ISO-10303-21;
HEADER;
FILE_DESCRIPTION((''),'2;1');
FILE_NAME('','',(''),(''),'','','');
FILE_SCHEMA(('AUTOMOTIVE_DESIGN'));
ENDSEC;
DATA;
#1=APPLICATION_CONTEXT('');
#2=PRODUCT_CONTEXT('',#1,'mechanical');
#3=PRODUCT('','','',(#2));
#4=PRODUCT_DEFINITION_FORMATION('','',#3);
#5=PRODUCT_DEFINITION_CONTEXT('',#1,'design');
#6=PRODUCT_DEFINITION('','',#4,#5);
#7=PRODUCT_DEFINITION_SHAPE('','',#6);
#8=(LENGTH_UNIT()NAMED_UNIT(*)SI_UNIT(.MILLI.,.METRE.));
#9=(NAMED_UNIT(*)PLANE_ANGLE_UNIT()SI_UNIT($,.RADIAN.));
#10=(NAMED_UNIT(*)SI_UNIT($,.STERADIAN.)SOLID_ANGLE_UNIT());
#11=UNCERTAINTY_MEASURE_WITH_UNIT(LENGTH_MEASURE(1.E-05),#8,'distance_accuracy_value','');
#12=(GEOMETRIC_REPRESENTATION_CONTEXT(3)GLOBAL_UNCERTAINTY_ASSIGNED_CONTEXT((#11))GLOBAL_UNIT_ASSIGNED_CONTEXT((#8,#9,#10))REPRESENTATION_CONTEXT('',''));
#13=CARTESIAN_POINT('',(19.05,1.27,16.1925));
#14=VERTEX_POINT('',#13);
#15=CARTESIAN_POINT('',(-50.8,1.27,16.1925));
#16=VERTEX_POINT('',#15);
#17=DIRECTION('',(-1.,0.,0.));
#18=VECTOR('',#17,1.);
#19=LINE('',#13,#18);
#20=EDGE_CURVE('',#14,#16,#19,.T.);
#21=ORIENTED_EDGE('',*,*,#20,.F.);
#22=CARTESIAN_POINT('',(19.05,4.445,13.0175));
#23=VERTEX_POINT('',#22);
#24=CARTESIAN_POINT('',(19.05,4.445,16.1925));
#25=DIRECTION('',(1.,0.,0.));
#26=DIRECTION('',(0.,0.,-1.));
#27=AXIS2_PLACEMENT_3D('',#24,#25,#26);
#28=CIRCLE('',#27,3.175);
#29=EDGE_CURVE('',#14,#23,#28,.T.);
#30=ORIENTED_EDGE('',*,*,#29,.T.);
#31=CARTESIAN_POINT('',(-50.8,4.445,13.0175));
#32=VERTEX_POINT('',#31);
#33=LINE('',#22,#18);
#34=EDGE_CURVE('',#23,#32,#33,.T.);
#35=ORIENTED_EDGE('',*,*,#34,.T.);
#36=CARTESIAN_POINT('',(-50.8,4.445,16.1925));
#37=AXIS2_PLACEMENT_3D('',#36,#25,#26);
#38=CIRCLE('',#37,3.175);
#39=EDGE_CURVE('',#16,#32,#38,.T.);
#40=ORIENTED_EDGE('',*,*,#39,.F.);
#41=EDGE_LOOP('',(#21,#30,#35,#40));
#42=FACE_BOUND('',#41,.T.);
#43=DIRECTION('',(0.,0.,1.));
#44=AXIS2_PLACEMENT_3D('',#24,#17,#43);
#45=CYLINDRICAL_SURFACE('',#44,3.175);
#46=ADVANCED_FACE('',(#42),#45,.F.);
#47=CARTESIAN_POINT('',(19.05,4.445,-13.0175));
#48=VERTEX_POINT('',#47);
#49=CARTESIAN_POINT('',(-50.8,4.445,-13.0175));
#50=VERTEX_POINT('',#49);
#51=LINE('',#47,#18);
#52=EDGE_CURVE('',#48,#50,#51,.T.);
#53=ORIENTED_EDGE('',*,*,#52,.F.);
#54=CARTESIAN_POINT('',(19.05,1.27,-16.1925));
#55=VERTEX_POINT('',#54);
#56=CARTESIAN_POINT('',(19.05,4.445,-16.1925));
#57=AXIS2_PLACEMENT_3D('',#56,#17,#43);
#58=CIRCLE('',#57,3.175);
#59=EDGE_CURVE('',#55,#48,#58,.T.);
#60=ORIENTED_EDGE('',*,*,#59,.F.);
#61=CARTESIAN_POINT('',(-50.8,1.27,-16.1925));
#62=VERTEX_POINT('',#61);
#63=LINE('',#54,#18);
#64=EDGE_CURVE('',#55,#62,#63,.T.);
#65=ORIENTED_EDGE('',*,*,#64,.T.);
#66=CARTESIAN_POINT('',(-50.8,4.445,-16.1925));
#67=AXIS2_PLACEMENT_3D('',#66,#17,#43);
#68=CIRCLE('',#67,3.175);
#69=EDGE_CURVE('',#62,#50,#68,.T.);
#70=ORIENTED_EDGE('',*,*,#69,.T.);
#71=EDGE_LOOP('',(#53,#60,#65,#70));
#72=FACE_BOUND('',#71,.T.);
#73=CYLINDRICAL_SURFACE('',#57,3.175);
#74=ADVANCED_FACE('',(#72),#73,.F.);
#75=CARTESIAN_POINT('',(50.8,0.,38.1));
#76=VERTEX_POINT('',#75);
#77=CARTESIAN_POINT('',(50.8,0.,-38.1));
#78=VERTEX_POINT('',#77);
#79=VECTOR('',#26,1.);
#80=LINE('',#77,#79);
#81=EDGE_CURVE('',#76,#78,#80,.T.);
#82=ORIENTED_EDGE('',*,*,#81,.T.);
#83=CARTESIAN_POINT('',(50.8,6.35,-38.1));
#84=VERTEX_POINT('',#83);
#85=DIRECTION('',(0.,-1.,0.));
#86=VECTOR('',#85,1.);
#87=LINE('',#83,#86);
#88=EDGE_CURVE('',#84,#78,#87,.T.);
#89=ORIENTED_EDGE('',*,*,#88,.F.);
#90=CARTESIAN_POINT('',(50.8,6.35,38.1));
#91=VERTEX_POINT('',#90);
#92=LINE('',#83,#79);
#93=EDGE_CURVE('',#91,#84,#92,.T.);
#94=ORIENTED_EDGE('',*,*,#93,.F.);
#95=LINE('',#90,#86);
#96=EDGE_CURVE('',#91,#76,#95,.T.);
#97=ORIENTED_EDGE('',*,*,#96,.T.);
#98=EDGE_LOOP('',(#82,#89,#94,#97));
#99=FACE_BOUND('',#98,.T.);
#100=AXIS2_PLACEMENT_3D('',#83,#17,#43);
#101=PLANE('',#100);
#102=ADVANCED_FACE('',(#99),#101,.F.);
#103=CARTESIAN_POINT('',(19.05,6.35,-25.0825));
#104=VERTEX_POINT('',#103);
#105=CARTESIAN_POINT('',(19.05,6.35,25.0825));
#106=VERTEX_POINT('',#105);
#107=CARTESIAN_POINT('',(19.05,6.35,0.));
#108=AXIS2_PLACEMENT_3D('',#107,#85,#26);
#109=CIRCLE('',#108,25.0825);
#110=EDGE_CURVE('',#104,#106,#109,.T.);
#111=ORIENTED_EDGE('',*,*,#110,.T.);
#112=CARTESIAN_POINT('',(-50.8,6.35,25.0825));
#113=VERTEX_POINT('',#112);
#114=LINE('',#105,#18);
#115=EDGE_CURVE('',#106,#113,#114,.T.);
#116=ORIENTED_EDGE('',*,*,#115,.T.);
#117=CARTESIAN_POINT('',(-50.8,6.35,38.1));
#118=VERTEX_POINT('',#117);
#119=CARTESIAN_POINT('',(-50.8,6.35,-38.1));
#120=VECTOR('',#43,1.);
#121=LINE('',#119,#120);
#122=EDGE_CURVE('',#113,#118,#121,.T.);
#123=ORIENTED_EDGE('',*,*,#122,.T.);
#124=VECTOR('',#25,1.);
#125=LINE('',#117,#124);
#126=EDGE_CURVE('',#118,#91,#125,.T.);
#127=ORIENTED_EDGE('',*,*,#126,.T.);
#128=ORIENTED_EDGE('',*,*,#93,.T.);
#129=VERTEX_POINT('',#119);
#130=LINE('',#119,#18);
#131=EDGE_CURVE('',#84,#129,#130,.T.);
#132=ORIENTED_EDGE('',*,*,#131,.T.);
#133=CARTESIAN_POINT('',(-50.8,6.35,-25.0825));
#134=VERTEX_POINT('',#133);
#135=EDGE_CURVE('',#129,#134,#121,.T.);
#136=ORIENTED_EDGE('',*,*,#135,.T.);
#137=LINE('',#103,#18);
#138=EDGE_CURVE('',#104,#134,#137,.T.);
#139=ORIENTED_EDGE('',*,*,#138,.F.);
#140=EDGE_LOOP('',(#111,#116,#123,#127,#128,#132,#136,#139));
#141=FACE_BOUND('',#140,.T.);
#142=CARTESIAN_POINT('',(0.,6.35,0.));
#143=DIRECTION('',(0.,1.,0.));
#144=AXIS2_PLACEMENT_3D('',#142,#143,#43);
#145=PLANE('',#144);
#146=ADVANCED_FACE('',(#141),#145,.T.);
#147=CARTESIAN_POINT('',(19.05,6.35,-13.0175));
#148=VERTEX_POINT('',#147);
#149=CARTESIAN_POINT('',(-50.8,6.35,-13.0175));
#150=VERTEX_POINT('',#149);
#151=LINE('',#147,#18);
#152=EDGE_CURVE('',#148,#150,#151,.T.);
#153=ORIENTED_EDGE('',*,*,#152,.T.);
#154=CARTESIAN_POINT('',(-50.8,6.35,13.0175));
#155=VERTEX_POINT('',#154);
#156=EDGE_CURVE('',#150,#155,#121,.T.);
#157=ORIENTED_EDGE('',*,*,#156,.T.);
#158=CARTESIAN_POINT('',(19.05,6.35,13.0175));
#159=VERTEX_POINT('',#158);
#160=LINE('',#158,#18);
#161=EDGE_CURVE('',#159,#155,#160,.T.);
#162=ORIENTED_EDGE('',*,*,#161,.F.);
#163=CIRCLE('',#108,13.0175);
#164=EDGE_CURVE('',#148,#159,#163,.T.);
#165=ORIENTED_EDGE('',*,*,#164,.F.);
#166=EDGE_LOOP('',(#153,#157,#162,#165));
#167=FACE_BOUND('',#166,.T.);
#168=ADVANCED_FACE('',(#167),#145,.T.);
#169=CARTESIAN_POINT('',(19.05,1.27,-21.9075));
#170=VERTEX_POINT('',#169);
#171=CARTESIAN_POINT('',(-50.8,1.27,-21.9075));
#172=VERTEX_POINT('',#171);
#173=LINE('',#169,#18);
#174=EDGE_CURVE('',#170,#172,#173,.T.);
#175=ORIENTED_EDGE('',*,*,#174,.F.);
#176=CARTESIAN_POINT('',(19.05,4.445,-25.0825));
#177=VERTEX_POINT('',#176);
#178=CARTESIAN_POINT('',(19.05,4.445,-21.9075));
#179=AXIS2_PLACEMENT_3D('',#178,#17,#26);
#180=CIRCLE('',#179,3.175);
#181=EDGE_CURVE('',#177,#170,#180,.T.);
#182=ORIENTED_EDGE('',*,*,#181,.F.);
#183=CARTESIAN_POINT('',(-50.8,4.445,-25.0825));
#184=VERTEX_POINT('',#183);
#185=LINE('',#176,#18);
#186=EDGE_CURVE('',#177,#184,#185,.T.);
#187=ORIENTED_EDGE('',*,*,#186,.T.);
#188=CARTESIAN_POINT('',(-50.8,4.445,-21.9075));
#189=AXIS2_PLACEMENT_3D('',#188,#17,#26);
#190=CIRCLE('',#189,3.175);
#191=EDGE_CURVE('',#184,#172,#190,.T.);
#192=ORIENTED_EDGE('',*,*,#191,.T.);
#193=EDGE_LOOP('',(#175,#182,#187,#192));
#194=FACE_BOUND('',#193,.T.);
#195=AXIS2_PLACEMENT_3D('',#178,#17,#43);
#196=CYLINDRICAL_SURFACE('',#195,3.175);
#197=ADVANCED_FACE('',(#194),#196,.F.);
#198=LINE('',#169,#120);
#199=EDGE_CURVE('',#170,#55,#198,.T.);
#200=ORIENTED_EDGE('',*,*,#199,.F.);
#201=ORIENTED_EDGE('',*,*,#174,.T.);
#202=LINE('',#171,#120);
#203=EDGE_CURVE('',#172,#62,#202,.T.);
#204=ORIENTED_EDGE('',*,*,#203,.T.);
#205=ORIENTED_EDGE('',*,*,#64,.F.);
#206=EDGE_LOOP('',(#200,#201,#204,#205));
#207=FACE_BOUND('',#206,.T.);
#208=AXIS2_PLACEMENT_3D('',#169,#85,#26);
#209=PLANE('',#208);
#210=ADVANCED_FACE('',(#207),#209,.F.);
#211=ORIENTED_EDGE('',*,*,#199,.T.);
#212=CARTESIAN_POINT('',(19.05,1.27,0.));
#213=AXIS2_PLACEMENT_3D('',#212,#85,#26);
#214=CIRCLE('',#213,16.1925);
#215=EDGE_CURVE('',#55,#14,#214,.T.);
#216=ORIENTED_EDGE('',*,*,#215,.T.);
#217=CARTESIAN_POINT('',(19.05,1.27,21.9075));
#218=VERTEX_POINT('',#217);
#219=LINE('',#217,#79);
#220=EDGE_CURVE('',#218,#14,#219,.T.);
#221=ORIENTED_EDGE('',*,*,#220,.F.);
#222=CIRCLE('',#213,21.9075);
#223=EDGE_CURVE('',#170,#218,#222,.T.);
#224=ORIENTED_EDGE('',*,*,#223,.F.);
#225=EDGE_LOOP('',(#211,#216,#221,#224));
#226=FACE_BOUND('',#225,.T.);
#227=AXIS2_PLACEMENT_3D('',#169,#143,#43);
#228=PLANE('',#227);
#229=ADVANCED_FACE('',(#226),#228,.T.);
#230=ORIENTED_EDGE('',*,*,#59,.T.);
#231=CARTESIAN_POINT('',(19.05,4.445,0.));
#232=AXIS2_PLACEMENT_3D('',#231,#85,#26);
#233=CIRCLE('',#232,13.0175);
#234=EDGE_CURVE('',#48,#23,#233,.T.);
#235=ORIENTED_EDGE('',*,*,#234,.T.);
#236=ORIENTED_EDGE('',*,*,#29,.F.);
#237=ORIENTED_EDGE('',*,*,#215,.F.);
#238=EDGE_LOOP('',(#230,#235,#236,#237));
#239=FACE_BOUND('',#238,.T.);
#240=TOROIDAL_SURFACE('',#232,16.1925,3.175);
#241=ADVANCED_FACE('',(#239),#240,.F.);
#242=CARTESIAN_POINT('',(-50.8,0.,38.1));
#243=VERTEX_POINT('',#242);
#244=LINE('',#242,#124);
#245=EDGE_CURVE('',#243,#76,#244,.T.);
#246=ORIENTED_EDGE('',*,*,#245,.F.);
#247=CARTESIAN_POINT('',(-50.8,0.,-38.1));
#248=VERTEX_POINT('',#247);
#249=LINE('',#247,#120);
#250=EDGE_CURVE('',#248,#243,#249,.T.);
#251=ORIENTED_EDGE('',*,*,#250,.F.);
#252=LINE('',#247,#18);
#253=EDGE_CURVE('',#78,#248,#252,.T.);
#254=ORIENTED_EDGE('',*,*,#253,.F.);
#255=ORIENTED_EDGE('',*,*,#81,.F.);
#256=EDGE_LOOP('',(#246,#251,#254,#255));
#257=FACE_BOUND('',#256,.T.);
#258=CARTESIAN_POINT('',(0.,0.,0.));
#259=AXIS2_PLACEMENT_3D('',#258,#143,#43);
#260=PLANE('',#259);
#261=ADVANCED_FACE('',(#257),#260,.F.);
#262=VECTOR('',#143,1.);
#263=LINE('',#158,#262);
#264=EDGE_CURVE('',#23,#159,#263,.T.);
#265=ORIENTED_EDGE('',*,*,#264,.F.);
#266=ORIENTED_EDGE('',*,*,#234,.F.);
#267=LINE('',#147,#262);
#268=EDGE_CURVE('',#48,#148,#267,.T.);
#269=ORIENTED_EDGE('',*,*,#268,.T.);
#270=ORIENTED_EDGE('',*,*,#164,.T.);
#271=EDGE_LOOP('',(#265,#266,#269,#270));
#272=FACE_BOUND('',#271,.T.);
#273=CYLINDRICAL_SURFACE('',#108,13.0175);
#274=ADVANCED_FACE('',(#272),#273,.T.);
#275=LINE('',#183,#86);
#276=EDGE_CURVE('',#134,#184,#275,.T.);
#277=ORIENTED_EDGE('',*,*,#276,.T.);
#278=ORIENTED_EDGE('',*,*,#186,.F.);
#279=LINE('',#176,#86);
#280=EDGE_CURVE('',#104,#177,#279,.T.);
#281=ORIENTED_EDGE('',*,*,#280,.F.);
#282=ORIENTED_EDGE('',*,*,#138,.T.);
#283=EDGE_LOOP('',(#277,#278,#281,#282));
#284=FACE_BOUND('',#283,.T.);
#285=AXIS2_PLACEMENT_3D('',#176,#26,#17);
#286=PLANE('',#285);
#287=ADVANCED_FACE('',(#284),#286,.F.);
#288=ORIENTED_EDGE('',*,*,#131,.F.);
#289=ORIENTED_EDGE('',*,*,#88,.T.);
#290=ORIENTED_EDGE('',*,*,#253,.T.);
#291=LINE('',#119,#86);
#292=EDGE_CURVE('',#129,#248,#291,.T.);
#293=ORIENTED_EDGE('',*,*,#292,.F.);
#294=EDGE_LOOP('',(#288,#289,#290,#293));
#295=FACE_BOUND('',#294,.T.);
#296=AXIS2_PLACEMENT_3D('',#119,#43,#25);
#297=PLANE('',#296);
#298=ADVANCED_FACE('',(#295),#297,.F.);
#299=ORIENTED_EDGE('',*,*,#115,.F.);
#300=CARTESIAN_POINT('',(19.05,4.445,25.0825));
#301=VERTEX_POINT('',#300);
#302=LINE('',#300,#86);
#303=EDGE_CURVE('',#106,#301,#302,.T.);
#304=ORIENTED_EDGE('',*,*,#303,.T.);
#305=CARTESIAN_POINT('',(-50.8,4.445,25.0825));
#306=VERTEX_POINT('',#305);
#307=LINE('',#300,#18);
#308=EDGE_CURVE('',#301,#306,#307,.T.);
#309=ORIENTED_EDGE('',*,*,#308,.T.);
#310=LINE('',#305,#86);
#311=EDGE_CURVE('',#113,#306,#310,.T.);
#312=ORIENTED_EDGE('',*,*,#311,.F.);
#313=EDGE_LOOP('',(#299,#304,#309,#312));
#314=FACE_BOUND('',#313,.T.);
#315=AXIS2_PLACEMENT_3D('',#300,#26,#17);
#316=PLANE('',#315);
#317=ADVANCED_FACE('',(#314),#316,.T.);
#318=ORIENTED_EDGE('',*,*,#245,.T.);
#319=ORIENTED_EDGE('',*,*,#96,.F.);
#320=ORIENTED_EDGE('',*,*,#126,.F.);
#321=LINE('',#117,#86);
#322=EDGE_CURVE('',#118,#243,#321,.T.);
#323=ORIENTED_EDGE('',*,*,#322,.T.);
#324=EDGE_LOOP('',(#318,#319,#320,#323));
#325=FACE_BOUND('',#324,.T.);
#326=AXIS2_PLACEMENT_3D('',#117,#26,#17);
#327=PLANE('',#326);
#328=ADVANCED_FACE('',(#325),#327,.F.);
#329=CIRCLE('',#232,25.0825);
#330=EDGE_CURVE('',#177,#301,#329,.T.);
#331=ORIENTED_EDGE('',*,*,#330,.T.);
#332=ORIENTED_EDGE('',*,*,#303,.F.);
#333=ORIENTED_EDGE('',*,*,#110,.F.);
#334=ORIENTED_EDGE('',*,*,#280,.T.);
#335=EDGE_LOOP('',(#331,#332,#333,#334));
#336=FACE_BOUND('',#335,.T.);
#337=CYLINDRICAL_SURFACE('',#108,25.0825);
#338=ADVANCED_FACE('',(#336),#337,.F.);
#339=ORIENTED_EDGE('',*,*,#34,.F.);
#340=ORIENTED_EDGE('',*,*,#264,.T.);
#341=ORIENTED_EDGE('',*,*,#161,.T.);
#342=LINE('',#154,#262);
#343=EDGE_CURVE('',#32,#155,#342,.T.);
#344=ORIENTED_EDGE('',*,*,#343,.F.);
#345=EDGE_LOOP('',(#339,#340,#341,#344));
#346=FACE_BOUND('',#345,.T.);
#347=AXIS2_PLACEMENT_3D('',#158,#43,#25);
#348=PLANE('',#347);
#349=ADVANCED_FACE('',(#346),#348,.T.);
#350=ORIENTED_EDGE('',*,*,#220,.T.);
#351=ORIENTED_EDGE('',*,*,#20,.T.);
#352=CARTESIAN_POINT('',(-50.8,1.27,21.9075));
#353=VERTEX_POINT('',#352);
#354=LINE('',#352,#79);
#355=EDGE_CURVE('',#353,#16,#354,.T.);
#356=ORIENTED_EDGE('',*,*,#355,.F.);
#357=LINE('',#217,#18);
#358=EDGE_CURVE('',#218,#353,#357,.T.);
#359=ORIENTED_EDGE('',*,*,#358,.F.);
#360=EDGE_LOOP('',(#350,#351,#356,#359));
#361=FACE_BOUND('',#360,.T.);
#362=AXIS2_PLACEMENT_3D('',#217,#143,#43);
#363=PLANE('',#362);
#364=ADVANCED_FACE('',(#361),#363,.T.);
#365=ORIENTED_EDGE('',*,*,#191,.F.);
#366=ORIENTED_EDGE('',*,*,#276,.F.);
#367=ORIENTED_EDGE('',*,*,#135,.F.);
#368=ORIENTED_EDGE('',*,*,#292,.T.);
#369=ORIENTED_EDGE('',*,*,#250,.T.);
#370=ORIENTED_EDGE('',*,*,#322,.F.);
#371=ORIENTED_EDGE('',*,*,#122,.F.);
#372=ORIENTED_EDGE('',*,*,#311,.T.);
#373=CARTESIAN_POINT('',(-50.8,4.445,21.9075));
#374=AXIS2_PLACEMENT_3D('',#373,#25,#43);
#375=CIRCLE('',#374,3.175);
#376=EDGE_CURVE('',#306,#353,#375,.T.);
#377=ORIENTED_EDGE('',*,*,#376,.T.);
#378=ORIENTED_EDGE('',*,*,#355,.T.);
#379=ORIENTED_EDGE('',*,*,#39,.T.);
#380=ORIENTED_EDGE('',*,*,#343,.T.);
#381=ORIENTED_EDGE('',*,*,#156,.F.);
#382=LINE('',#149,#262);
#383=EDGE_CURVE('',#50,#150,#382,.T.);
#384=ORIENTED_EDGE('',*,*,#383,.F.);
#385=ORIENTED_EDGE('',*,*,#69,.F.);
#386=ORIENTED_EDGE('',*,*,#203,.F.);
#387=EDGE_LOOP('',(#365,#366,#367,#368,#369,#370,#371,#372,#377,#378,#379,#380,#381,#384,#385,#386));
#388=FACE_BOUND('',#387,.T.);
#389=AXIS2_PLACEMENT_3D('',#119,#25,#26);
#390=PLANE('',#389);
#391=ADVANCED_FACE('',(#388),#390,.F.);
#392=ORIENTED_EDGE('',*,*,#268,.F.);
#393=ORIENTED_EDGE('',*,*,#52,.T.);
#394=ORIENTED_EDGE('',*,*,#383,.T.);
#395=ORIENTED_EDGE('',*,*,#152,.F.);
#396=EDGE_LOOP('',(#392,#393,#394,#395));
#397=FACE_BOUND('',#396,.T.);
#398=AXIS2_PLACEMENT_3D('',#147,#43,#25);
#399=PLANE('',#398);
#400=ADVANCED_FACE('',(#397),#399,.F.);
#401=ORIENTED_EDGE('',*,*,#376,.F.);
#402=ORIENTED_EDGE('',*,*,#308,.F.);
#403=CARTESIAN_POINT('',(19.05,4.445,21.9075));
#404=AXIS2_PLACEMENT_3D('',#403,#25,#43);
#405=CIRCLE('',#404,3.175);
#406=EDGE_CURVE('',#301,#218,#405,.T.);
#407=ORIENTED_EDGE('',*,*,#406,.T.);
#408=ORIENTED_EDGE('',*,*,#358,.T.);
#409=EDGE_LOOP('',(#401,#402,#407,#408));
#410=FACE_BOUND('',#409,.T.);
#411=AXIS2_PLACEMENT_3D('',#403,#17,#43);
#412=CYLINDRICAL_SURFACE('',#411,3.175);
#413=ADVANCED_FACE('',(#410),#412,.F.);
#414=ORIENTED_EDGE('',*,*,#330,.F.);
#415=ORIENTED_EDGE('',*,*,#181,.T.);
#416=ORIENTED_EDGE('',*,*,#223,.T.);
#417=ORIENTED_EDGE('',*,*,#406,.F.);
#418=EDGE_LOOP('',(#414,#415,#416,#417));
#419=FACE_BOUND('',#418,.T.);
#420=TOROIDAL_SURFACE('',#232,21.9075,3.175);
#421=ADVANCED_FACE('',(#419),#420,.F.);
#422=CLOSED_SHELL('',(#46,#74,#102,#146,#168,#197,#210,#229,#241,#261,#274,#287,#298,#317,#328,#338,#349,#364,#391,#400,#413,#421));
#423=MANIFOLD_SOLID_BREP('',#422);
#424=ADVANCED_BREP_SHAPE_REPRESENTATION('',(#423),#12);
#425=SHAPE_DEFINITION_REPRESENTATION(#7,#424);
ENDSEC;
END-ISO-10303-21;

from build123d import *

# Parameters (mm, degrees)
SKETCH1_W            = 101.6
SKETCH1_H            = 76.2
BASE_PLATE_DEPTH     = 6.35
PIPE_START           = -50.8
PIPE_PROFILE_DEPTH   = 69.85
PIPE_PROFILE_2_ANGLE = 180


with BuildPart() as part:
    # Sketch1 → Base Plate (new body)
    with BuildSketch(Plane(origin=(0, 0, 0), x_dir=(1, 0, 0), z_dir=(0, 1, 0))):
        Rectangle(SKETCH1_W, SKETCH1_H)
    extrude(amount=BASE_PLATE_DEPTH)

    # Pipe Profile: read off the stored shape, not the designer's step
    # Pipe Profile outline → Pipe Profile (cut)
    with BuildSketch(Plane.YZ.offset(PIPE_START)):
        with BuildLine():
            Line((6.35, 25.0825), (4.445, 25.0825))
            ThreePointArc((4.445, 25.0825), (2.19993597, 24.15256403), (1.27, 21.9075))
            Line((1.27, 21.9075), (1.27, 16.1925))
            ThreePointArc((1.27, 16.1925), (2.19993597, 13.94743597), (4.445, 13.0175))
            Line((4.445, 13.0175), (6.35, 13.0175))
            Line((6.35, 13.0175), (6.35, 25.0825))
        make_face()
        with BuildLine():
            Line((6.35, -25.0825), (6.35, -13.0175))
            Line((6.35, -13.0175), (4.445, -13.0175))
            ThreePointArc((4.445, -13.0175), (2.19993597, -13.94743597), (1.27, -16.1925))
            Line((1.27, -16.1925), (1.27, -21.9075))
            ThreePointArc((1.27, -21.9075), (2.19993597, -24.15256403), (4.445, -25.0825))
            Line((4.445, -25.0825), (6.35, -25.0825))
        make_face()
    extrude(amount=PIPE_PROFILE_DEPTH, mode=Mode.SUBTRACT)

    # Pipe Profile 2 outline → Pipe Profile 2 (revolve, cut)
    with BuildSketch(Plane.ZY.offset(-19.05)):
        with BuildLine():
            ThreePointArc((13.0175, 4.445), (13.94743597, 2.19993597), (16.1925, 1.27))
            Line((16.1925, 1.27), (21.9075, 1.27))
            ThreePointArc((21.9075, 1.27), (24.15256403, 2.19993597), (25.0825, 4.445))
            Line((25.0825, 4.445), (25.0825, 6.35))
            Line((25.0825, 6.35), (13.0175, 6.35))
            Line((13.0175, 6.35), (13.0175, 4.445))
        make_face()
    revolve(axis=Axis((19.05, 0, 0), (0, 1, 0)), revolution_arc=PIPE_PROFILE_2_ANGLE, mode=Mode.SUBTRACT)


solid = part.part
